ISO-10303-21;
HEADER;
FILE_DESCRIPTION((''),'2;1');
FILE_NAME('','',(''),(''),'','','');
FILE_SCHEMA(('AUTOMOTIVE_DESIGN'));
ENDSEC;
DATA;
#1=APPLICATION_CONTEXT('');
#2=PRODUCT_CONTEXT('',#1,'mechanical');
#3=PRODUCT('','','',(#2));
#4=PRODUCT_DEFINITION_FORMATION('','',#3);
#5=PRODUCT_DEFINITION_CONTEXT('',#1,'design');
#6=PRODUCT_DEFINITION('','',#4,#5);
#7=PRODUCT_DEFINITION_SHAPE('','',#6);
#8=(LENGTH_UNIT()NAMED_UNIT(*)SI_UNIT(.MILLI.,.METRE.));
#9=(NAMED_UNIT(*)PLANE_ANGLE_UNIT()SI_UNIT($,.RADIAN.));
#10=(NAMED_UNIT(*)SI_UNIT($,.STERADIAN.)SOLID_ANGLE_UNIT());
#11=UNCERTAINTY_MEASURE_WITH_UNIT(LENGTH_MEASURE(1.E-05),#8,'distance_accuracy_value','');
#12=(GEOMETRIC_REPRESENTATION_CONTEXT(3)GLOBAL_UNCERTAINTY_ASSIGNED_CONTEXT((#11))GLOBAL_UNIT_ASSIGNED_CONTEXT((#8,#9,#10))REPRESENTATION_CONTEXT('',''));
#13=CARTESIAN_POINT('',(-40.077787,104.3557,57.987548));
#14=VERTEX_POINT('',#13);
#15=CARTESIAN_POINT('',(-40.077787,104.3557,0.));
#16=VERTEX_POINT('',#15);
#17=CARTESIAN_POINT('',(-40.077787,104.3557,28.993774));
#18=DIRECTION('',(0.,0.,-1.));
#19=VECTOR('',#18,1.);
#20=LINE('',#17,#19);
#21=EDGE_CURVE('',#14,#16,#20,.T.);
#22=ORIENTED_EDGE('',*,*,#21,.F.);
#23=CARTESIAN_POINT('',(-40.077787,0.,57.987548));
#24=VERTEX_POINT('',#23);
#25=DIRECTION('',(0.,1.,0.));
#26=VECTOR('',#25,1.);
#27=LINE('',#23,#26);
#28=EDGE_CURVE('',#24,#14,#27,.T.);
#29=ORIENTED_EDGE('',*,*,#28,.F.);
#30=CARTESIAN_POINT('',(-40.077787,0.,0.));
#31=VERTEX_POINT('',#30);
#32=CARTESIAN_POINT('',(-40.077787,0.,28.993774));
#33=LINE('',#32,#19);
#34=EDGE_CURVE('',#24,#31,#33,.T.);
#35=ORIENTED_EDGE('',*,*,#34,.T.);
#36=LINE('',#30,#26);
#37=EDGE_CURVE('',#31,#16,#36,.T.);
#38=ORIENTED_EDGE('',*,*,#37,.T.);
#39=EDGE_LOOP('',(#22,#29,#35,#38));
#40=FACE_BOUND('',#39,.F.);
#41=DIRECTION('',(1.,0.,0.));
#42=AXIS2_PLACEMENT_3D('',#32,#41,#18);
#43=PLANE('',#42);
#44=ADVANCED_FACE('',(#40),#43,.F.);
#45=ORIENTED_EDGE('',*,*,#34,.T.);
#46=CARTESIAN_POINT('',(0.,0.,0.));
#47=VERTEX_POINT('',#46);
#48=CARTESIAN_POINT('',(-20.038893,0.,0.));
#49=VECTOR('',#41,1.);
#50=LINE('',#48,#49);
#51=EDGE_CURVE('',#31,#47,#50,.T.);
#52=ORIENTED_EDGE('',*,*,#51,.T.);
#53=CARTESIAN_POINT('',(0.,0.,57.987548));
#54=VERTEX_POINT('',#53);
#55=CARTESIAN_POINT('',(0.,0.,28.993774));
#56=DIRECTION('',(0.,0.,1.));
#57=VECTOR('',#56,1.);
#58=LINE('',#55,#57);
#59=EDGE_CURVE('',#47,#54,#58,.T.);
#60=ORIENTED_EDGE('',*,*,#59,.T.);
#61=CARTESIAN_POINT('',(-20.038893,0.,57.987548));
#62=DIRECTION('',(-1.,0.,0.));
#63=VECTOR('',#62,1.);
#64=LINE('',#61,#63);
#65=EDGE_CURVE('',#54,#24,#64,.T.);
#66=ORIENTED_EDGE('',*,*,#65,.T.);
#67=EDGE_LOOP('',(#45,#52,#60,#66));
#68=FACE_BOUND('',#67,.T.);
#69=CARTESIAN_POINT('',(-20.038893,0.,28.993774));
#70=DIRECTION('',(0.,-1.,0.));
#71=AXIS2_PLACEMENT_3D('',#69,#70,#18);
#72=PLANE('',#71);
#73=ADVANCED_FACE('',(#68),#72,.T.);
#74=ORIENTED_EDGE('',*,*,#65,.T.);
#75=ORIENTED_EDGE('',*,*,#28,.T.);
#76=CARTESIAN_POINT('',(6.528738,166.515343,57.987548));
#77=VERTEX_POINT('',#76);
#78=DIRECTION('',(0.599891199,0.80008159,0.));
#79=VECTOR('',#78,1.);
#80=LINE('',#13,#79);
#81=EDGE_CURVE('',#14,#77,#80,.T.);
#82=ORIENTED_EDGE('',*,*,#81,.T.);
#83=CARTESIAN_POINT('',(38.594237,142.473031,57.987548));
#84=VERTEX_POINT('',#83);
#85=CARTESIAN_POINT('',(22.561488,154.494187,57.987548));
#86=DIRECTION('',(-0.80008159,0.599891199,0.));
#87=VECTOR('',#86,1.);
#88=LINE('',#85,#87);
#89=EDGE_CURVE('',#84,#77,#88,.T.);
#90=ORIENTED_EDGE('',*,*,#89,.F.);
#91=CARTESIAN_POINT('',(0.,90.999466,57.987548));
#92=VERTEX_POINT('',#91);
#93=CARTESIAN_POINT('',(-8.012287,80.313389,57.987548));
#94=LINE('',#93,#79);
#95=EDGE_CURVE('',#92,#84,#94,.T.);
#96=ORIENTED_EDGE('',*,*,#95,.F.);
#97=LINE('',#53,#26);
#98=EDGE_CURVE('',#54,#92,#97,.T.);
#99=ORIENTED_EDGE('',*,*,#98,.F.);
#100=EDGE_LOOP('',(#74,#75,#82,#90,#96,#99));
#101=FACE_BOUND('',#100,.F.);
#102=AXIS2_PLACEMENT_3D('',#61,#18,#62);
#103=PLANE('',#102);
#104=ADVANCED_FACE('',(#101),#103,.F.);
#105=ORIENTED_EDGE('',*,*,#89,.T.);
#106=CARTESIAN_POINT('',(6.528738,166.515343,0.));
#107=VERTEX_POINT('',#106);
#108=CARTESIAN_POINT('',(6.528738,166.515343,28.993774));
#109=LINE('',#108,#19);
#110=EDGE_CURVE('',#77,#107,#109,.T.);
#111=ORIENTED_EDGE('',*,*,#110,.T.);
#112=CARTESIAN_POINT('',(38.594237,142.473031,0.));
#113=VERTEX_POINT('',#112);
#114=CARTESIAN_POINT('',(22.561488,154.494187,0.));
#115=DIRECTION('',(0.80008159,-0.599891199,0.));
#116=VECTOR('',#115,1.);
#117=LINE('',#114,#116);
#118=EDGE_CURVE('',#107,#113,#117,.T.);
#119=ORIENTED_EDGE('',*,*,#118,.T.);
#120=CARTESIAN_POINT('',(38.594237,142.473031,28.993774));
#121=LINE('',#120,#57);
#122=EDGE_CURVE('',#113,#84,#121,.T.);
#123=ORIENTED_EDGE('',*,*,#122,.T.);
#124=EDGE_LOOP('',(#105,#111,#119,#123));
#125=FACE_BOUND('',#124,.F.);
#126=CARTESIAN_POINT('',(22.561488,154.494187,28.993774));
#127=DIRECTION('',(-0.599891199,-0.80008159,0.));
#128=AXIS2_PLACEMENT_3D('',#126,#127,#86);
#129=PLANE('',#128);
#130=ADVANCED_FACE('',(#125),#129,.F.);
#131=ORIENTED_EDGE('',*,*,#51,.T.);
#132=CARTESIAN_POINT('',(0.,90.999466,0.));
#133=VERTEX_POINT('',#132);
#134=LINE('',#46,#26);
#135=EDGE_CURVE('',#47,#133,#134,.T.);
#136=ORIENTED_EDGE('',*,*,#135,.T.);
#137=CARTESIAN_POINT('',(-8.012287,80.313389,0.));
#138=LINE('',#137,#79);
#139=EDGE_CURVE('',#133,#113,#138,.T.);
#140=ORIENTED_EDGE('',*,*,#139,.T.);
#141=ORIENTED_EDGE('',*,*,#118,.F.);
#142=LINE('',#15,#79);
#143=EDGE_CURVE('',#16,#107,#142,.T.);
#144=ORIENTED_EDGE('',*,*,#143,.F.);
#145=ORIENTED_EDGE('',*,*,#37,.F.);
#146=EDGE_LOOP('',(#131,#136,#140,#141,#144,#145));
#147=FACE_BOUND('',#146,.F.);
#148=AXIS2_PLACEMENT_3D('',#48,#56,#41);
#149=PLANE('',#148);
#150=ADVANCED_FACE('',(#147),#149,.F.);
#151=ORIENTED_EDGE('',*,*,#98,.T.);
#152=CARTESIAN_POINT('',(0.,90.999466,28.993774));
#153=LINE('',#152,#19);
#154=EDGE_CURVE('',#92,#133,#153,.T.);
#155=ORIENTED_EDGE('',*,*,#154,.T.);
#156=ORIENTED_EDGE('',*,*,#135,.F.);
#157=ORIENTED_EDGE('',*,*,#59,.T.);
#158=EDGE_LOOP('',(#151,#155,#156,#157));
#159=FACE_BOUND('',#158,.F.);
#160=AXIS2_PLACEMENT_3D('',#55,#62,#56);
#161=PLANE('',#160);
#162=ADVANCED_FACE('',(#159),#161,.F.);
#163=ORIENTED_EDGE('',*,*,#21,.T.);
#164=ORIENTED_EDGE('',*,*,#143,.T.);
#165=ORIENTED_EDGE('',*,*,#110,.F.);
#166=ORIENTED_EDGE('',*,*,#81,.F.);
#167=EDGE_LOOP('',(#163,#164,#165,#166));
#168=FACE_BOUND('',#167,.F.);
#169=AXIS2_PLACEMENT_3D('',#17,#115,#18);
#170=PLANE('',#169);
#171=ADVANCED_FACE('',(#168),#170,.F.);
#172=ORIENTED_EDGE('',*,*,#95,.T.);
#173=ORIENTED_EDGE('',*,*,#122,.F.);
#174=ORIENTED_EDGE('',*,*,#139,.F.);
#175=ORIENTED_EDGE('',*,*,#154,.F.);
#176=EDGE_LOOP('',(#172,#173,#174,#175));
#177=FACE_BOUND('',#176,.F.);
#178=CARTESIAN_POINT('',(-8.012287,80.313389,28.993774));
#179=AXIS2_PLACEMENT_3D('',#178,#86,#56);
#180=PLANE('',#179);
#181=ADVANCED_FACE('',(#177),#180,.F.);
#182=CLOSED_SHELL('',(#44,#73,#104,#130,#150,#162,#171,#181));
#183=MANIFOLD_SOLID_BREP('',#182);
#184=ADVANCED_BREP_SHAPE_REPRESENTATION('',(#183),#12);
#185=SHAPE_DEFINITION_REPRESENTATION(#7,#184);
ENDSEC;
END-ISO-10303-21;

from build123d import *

# Parameters (mm, degrees)
F0_W = 40.0777868927
F0_H = 57.9875484109


with BuildPart() as f2:
    # F2: sweep along a path in F1
    with BuildLine(Plane.XY) as f2_path:
        Line((-40.0777868927, 0), (-40.0777868927, 104.355700314))
        Line((-40.0777868927, 104.355700314), (6.5287379548, 166.5153428912))
    # F0 (on Front) → F2 (sweep)
    with BuildSketch(Plane.XZ):
        with Locations((-20.0388934463, 28.9937742054)):
            Rectangle(F0_W, F0_H)
    sweep(path=f2_path.line, transition=Transition.RIGHT)


solid = f2.part
